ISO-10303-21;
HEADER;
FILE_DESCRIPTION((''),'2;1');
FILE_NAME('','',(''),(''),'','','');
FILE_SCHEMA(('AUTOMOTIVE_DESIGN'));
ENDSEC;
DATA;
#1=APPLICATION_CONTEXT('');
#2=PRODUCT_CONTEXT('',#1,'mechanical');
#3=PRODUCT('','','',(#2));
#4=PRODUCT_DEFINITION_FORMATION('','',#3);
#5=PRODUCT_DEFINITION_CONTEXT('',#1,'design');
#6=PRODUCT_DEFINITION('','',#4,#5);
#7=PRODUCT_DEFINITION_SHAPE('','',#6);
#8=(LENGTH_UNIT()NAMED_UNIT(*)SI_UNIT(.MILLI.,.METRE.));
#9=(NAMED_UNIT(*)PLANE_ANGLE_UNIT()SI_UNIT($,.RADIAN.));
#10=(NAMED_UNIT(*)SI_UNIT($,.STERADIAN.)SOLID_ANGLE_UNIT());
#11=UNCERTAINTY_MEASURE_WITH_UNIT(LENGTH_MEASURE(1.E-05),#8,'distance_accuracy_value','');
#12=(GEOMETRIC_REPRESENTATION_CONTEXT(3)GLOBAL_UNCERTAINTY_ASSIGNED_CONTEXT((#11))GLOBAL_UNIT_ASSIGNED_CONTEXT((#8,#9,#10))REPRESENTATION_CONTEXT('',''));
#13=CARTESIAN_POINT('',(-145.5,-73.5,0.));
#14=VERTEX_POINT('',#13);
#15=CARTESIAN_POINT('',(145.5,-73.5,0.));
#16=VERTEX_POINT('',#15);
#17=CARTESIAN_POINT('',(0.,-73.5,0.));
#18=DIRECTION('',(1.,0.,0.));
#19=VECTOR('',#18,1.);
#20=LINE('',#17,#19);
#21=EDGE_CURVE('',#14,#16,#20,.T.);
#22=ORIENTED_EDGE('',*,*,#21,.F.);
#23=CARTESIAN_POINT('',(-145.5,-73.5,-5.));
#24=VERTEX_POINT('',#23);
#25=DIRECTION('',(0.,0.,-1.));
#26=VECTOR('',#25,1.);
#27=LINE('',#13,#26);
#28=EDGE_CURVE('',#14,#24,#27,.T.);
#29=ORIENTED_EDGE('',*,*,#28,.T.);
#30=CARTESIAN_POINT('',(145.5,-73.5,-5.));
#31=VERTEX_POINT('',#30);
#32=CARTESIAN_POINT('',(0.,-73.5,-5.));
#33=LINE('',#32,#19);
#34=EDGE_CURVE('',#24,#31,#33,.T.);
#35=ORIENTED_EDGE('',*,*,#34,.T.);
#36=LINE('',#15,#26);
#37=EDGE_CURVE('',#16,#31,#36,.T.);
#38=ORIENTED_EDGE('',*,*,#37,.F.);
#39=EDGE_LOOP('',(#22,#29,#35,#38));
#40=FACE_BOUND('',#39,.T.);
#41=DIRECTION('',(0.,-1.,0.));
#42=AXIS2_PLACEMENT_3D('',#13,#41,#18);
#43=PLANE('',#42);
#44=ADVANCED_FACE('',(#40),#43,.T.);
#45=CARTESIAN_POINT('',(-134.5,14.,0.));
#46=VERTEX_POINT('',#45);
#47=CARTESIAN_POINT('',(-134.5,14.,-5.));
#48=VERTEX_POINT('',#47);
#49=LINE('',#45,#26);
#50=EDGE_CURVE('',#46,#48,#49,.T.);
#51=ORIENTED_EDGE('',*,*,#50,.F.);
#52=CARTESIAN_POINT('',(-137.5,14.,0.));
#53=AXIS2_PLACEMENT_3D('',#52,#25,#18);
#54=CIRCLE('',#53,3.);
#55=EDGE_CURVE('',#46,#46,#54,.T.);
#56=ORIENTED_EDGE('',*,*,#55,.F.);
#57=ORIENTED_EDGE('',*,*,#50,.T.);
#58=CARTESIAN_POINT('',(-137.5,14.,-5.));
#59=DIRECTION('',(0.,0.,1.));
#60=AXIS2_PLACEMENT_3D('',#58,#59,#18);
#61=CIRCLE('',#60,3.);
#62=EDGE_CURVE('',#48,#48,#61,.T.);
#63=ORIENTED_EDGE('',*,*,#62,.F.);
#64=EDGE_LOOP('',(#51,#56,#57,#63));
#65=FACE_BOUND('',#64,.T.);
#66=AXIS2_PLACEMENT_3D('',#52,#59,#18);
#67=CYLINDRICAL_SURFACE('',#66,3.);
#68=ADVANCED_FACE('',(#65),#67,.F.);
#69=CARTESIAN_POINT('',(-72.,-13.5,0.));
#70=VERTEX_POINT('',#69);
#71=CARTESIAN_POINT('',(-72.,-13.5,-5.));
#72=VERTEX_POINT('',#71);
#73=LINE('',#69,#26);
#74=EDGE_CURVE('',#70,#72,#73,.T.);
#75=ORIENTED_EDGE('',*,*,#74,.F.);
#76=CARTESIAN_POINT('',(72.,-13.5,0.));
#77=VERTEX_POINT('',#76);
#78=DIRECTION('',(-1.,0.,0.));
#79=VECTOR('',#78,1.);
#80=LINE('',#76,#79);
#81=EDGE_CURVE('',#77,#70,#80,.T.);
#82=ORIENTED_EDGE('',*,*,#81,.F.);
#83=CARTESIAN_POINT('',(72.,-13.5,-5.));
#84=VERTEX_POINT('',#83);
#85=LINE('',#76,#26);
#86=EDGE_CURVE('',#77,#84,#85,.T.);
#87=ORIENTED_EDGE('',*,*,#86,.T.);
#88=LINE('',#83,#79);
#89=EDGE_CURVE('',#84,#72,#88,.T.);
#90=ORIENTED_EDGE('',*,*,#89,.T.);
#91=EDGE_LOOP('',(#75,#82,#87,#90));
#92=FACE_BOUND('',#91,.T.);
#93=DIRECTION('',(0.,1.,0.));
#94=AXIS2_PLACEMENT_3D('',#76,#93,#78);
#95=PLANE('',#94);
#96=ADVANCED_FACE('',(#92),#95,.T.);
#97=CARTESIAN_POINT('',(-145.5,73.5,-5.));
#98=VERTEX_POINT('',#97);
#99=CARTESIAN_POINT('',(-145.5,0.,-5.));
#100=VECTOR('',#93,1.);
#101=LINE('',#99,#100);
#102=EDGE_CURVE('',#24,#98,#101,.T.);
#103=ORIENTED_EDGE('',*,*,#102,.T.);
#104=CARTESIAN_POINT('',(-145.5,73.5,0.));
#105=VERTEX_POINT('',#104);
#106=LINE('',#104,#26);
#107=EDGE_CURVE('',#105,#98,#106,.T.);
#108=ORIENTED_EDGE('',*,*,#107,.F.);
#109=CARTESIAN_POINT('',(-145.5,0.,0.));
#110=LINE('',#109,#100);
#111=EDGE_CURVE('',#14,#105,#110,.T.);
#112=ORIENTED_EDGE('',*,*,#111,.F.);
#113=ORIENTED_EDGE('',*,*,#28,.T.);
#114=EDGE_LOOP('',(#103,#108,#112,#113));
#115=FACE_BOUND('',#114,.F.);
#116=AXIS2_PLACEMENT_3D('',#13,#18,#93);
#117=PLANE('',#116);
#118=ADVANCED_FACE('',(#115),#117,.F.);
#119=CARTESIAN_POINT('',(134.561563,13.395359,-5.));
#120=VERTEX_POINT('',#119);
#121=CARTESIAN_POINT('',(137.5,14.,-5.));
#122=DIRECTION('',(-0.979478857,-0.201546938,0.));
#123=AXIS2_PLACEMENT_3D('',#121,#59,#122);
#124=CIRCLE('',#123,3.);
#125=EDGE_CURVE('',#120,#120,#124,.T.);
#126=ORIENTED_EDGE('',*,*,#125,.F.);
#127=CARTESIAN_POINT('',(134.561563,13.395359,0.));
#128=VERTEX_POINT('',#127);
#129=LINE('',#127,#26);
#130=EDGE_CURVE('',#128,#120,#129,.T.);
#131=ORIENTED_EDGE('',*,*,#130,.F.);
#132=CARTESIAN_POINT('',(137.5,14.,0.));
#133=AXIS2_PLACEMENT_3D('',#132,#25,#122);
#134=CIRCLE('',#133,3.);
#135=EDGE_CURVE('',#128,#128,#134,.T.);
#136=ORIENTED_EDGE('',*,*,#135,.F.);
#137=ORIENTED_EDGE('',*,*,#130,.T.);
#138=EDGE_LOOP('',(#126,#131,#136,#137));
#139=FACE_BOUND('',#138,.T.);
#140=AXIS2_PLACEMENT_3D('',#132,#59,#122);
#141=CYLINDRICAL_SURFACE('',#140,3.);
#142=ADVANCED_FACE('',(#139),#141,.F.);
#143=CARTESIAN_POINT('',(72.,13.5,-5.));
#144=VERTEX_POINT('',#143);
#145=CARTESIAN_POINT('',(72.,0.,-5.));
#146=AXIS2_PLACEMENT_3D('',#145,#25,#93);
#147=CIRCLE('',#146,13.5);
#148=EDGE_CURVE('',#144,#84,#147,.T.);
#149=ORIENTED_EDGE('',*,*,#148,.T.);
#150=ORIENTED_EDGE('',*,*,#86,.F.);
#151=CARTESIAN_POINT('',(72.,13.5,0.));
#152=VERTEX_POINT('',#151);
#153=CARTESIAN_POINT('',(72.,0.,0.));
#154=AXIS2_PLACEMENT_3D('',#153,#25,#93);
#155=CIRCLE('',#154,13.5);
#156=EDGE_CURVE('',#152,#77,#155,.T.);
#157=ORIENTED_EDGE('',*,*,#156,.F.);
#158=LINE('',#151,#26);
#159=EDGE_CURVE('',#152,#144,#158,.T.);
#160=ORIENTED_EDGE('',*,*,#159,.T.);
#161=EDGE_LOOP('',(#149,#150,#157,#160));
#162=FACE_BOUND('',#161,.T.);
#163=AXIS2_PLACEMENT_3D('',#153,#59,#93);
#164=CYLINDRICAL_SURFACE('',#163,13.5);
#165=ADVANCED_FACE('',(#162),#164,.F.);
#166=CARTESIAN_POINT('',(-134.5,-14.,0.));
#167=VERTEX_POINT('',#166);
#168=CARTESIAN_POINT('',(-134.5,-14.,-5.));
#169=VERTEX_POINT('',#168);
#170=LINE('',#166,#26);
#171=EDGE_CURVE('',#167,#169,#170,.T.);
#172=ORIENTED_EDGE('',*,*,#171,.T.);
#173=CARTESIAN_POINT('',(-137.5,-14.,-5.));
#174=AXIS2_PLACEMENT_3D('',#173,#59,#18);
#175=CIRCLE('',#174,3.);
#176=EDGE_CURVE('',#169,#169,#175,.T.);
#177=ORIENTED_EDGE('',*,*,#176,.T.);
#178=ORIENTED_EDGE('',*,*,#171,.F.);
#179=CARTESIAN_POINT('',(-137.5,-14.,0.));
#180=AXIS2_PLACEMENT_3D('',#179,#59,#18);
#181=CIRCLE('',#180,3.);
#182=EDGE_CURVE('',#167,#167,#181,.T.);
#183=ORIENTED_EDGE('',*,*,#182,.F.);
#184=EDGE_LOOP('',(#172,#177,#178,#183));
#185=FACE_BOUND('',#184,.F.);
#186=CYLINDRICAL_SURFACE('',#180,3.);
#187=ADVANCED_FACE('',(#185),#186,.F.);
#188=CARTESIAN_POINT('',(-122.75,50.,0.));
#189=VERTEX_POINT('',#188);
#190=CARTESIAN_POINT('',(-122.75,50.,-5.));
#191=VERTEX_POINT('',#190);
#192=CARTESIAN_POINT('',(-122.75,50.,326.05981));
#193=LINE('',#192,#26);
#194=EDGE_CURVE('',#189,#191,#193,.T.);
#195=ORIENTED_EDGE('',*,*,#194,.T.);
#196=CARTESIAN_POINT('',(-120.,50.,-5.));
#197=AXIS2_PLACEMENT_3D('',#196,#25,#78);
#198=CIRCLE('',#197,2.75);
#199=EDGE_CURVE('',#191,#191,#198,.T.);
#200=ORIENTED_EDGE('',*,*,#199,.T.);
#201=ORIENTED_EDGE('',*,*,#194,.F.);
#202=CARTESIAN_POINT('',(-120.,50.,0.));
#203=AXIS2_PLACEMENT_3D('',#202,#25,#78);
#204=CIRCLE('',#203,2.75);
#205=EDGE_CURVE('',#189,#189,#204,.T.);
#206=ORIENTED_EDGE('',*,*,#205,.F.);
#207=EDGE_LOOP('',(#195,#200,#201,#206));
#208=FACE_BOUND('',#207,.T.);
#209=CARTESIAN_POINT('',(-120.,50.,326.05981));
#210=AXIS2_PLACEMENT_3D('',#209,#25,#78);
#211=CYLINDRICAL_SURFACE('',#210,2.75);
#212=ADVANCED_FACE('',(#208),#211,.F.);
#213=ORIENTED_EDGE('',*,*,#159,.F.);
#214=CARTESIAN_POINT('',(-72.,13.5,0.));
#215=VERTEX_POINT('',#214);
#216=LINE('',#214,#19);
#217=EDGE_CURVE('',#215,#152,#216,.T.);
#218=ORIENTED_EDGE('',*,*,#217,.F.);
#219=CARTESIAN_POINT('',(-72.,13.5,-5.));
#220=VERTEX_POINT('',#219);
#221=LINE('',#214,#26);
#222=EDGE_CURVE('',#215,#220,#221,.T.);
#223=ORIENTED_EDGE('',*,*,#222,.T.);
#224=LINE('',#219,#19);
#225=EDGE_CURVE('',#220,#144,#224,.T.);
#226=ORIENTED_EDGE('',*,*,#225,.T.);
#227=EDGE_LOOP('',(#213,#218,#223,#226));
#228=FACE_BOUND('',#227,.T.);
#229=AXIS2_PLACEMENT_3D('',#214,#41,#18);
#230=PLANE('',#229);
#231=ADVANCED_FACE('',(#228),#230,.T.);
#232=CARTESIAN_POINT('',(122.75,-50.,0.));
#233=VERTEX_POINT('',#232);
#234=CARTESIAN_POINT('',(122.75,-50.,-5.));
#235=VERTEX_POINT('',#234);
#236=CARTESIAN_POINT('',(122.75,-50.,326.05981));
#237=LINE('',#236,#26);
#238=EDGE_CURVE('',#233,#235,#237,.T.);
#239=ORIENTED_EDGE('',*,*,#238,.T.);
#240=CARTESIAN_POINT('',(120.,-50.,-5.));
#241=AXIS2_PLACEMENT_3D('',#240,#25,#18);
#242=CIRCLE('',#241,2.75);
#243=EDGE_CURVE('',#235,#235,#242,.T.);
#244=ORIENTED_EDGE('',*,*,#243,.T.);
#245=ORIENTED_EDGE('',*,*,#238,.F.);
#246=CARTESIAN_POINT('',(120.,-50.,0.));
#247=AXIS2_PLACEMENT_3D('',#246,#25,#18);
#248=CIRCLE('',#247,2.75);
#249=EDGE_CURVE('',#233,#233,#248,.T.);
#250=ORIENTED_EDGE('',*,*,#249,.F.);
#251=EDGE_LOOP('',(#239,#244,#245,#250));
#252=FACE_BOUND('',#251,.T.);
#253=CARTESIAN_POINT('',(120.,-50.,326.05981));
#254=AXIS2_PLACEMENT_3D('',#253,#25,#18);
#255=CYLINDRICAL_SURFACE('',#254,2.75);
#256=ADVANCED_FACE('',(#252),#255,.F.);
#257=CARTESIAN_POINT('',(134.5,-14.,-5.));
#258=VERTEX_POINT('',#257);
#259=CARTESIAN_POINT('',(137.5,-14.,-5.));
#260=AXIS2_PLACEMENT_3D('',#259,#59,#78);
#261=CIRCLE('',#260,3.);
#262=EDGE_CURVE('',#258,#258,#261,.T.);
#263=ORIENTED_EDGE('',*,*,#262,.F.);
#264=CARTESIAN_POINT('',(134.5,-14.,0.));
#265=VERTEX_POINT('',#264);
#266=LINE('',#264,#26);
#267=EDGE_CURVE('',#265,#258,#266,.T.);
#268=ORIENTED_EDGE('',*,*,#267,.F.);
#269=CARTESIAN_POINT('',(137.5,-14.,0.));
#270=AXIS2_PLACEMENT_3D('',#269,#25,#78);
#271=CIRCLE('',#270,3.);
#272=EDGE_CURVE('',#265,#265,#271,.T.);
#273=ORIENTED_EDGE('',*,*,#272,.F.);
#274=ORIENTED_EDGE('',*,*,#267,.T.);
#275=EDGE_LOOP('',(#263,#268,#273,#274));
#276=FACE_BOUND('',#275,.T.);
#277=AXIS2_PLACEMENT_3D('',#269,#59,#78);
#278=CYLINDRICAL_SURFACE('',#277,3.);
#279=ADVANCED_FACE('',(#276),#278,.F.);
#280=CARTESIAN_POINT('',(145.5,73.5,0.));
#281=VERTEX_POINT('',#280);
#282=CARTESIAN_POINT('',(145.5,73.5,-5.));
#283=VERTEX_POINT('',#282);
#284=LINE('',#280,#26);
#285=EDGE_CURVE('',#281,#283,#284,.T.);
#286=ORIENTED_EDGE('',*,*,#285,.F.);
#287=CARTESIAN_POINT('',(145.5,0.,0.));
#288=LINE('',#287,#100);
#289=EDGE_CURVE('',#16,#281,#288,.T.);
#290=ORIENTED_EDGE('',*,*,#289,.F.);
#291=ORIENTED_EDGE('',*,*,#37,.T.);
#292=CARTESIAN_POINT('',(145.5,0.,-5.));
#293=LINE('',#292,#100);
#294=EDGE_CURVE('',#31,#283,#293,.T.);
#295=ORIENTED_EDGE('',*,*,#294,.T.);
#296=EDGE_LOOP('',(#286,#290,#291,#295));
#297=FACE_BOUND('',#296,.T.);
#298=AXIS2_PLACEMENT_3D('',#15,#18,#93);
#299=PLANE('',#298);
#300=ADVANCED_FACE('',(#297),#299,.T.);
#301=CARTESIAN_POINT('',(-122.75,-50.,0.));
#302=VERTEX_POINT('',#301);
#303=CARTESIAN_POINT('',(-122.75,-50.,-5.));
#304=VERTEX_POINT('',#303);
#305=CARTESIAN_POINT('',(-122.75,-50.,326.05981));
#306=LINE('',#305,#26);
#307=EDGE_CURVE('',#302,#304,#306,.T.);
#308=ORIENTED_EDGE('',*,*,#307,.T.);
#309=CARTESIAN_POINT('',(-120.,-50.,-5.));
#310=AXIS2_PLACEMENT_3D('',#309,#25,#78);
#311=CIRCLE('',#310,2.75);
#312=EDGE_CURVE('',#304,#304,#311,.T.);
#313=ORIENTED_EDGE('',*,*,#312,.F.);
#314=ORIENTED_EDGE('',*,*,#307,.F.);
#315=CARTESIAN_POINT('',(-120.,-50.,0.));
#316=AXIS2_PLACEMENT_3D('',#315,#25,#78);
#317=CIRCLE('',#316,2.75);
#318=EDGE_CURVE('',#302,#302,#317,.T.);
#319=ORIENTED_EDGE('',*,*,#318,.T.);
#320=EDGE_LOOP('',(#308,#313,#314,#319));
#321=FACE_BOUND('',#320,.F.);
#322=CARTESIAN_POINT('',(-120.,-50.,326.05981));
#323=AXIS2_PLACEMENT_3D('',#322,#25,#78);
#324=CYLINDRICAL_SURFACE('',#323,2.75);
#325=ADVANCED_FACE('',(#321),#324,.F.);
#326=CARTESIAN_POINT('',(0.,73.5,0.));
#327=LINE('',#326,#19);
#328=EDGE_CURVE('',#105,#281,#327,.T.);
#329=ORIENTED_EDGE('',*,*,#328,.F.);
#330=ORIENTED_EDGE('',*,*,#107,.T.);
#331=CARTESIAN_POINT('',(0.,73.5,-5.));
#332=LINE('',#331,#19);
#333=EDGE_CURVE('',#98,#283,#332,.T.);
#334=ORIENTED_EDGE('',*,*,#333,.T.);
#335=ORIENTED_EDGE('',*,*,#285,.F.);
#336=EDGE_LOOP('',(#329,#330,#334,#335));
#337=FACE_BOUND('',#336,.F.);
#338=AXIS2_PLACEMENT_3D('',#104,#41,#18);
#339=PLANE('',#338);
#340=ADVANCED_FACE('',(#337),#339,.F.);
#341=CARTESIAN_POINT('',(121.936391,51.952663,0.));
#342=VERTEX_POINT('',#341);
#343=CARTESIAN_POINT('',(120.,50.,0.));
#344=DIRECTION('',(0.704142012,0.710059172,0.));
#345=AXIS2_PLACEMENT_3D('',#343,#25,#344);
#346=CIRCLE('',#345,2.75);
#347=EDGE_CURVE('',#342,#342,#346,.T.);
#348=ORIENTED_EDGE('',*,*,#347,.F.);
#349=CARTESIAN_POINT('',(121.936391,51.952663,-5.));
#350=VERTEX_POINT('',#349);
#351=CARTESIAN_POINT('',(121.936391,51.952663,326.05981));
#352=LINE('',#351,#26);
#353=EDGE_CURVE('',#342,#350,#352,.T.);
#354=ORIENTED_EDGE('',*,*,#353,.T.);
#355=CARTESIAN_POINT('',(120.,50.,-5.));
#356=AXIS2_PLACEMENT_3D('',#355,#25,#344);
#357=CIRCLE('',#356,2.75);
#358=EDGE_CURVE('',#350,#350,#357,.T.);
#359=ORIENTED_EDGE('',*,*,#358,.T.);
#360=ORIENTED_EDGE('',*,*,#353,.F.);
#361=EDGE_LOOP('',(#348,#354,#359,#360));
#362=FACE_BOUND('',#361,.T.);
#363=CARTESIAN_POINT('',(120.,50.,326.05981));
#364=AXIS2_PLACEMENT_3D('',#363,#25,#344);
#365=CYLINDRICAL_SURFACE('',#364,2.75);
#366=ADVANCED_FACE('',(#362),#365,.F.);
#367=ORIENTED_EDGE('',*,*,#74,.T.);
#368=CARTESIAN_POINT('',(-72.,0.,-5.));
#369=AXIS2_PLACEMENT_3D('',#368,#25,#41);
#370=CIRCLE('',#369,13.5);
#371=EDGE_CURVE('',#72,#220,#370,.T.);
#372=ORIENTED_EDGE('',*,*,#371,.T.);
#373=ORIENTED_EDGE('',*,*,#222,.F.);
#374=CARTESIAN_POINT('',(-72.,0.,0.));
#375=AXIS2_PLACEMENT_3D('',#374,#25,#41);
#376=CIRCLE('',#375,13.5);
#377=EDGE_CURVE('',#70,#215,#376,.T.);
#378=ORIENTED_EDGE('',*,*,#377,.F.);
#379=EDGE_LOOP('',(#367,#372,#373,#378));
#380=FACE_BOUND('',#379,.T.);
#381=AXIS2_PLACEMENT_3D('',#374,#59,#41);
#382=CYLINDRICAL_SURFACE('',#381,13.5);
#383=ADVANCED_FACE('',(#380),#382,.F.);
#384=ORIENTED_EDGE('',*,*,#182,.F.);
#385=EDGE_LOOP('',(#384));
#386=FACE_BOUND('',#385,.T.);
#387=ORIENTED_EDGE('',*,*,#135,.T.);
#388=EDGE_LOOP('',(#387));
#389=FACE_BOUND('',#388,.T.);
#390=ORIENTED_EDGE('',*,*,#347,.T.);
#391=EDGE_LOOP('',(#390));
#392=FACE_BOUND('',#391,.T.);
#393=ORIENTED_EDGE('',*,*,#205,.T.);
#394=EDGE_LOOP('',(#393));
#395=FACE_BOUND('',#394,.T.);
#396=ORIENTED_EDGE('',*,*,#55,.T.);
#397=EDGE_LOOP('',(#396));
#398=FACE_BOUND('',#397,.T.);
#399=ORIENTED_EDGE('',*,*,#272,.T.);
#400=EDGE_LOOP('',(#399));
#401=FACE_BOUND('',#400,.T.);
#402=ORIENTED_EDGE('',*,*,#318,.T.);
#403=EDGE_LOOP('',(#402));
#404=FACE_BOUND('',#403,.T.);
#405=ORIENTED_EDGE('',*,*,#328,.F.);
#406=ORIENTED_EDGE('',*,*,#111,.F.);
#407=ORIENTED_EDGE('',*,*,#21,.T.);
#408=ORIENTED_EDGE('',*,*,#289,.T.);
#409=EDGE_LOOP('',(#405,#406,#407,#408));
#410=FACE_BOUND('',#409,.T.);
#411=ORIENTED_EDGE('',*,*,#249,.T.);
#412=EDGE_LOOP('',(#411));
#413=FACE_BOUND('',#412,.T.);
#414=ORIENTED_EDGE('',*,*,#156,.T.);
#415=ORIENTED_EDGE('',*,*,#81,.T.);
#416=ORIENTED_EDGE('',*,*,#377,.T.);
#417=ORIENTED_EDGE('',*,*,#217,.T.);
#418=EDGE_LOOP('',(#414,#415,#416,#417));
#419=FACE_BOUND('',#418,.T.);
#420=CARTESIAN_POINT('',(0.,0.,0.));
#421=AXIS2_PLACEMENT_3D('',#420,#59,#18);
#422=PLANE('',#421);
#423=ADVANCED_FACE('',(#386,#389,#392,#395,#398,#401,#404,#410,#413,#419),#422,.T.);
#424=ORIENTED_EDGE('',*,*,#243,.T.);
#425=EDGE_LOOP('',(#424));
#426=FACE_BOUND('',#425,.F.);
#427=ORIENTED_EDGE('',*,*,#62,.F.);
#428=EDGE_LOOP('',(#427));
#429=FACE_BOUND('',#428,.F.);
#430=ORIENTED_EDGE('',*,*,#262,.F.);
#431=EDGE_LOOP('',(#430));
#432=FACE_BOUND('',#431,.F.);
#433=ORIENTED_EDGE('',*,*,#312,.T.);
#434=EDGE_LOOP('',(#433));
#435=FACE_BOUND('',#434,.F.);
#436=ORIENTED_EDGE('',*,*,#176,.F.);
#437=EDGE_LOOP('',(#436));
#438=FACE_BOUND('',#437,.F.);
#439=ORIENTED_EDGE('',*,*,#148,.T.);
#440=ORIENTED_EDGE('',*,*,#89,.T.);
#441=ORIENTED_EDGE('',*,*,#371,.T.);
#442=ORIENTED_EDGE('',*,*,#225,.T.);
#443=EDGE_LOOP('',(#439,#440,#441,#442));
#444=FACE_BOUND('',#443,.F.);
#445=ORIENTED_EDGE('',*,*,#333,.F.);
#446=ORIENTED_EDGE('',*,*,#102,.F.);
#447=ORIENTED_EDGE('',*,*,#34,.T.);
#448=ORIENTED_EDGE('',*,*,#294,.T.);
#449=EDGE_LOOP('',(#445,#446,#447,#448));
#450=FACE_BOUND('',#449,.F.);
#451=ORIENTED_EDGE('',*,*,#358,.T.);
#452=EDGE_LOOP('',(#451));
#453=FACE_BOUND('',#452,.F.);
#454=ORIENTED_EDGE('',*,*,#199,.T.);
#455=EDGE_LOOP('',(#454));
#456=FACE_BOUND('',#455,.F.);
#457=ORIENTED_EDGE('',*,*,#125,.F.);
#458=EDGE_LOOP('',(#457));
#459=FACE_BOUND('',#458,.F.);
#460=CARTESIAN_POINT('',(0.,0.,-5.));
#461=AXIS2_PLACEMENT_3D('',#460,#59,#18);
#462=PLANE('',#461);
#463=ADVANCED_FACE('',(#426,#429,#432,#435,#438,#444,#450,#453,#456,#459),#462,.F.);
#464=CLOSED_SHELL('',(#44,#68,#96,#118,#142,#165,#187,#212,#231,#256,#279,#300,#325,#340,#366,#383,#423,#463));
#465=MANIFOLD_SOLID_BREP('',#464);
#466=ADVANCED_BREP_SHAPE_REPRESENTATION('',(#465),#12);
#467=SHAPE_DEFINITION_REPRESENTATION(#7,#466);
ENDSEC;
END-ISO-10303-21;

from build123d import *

# Parameters (mm, degrees)
F2_W     = 291
F2_H     = 147
F3_DEPTH = 5
F5_D     = 5.5
F6_R     = 3
F7_DEPTH = 5.001


# Not quite as in the source:
# - a pattern or mirror of a feature is missing from the dataset's text; its kind, count and spacing are read off the source's solid


with BuildPart() as f3:
    # F2 (on Top) → F3 (new body)
    with BuildSketch(Plane.XY):
        Rectangle(F2_W, F2_H)
        with BuildLine():
            ThreePointArc((-72, -13.5), (-85.5, 0), (-72, 13.5))
            Line((-72, 13.5), (72, 13.5))
            ThreePointArc((72, 13.5), (85.5, 0), (72, -13.5))
            Line((72, -13.5), (-72, -13.5))
        make_face(mode=Mode.SUBTRACT)
    extrude(amount=-F3_DEPTH)

    # F5 (through all)
    with Locations(Plane.XY):
        with Locations((-120, -50)):
            f5 = Hole(F5_D / 2)

    # F5_copies: F5 across plane
    add(f5.mirror(Plane(origin=(0, 0, 0), x_dir=(0, 0, 1), z_dir=(1, 0, 0))), mode=Mode.SUBTRACT)

    # F5_copies1: F5 across plane
    add(f5.mirror(Plane.ZX), mode=Mode.SUBTRACT)

    # F5_copies2: F5 across plane
    add(f5.mirror(Plane(origin=(0, 0, 0), x_dir=(-0.3846153846, 0.9230769231, 0), z_dir=(0.9230769231, 0.3846153846, 0))), mode=Mode.SUBTRACT)

    # F6 (on Top) → F7 (cut, through all)
    with BuildSketch(Plane.XY):
        with Locations((-137.5, -14)):
            Circle(F6_R)
    f7 = extrude(amount=-F7_DEPTH, mode=Mode.SUBTRACT)

    # F7_copies: F7 across plane
    add(f7.mirror(Plane(origin=(0, 0, 0), x_dir=(0, 0, 1), z_dir=(1, 0, 0))), mode=Mode.SUBTRACT)

    # F7_copies1: F7 across plane
    add(f7.mirror(Plane.ZX), mode=Mode.SUBTRACT)

    # F7_copies2: F7 across plane
    add(f7.mirror(Plane(origin=(0, 0, 0), x_dir=(-0.1012944786, 0.9948564864, 0), z_dir=(0.9948564864, 0.1012944786, 0))), mode=Mode.SUBTRACT)


solid = f3.part
